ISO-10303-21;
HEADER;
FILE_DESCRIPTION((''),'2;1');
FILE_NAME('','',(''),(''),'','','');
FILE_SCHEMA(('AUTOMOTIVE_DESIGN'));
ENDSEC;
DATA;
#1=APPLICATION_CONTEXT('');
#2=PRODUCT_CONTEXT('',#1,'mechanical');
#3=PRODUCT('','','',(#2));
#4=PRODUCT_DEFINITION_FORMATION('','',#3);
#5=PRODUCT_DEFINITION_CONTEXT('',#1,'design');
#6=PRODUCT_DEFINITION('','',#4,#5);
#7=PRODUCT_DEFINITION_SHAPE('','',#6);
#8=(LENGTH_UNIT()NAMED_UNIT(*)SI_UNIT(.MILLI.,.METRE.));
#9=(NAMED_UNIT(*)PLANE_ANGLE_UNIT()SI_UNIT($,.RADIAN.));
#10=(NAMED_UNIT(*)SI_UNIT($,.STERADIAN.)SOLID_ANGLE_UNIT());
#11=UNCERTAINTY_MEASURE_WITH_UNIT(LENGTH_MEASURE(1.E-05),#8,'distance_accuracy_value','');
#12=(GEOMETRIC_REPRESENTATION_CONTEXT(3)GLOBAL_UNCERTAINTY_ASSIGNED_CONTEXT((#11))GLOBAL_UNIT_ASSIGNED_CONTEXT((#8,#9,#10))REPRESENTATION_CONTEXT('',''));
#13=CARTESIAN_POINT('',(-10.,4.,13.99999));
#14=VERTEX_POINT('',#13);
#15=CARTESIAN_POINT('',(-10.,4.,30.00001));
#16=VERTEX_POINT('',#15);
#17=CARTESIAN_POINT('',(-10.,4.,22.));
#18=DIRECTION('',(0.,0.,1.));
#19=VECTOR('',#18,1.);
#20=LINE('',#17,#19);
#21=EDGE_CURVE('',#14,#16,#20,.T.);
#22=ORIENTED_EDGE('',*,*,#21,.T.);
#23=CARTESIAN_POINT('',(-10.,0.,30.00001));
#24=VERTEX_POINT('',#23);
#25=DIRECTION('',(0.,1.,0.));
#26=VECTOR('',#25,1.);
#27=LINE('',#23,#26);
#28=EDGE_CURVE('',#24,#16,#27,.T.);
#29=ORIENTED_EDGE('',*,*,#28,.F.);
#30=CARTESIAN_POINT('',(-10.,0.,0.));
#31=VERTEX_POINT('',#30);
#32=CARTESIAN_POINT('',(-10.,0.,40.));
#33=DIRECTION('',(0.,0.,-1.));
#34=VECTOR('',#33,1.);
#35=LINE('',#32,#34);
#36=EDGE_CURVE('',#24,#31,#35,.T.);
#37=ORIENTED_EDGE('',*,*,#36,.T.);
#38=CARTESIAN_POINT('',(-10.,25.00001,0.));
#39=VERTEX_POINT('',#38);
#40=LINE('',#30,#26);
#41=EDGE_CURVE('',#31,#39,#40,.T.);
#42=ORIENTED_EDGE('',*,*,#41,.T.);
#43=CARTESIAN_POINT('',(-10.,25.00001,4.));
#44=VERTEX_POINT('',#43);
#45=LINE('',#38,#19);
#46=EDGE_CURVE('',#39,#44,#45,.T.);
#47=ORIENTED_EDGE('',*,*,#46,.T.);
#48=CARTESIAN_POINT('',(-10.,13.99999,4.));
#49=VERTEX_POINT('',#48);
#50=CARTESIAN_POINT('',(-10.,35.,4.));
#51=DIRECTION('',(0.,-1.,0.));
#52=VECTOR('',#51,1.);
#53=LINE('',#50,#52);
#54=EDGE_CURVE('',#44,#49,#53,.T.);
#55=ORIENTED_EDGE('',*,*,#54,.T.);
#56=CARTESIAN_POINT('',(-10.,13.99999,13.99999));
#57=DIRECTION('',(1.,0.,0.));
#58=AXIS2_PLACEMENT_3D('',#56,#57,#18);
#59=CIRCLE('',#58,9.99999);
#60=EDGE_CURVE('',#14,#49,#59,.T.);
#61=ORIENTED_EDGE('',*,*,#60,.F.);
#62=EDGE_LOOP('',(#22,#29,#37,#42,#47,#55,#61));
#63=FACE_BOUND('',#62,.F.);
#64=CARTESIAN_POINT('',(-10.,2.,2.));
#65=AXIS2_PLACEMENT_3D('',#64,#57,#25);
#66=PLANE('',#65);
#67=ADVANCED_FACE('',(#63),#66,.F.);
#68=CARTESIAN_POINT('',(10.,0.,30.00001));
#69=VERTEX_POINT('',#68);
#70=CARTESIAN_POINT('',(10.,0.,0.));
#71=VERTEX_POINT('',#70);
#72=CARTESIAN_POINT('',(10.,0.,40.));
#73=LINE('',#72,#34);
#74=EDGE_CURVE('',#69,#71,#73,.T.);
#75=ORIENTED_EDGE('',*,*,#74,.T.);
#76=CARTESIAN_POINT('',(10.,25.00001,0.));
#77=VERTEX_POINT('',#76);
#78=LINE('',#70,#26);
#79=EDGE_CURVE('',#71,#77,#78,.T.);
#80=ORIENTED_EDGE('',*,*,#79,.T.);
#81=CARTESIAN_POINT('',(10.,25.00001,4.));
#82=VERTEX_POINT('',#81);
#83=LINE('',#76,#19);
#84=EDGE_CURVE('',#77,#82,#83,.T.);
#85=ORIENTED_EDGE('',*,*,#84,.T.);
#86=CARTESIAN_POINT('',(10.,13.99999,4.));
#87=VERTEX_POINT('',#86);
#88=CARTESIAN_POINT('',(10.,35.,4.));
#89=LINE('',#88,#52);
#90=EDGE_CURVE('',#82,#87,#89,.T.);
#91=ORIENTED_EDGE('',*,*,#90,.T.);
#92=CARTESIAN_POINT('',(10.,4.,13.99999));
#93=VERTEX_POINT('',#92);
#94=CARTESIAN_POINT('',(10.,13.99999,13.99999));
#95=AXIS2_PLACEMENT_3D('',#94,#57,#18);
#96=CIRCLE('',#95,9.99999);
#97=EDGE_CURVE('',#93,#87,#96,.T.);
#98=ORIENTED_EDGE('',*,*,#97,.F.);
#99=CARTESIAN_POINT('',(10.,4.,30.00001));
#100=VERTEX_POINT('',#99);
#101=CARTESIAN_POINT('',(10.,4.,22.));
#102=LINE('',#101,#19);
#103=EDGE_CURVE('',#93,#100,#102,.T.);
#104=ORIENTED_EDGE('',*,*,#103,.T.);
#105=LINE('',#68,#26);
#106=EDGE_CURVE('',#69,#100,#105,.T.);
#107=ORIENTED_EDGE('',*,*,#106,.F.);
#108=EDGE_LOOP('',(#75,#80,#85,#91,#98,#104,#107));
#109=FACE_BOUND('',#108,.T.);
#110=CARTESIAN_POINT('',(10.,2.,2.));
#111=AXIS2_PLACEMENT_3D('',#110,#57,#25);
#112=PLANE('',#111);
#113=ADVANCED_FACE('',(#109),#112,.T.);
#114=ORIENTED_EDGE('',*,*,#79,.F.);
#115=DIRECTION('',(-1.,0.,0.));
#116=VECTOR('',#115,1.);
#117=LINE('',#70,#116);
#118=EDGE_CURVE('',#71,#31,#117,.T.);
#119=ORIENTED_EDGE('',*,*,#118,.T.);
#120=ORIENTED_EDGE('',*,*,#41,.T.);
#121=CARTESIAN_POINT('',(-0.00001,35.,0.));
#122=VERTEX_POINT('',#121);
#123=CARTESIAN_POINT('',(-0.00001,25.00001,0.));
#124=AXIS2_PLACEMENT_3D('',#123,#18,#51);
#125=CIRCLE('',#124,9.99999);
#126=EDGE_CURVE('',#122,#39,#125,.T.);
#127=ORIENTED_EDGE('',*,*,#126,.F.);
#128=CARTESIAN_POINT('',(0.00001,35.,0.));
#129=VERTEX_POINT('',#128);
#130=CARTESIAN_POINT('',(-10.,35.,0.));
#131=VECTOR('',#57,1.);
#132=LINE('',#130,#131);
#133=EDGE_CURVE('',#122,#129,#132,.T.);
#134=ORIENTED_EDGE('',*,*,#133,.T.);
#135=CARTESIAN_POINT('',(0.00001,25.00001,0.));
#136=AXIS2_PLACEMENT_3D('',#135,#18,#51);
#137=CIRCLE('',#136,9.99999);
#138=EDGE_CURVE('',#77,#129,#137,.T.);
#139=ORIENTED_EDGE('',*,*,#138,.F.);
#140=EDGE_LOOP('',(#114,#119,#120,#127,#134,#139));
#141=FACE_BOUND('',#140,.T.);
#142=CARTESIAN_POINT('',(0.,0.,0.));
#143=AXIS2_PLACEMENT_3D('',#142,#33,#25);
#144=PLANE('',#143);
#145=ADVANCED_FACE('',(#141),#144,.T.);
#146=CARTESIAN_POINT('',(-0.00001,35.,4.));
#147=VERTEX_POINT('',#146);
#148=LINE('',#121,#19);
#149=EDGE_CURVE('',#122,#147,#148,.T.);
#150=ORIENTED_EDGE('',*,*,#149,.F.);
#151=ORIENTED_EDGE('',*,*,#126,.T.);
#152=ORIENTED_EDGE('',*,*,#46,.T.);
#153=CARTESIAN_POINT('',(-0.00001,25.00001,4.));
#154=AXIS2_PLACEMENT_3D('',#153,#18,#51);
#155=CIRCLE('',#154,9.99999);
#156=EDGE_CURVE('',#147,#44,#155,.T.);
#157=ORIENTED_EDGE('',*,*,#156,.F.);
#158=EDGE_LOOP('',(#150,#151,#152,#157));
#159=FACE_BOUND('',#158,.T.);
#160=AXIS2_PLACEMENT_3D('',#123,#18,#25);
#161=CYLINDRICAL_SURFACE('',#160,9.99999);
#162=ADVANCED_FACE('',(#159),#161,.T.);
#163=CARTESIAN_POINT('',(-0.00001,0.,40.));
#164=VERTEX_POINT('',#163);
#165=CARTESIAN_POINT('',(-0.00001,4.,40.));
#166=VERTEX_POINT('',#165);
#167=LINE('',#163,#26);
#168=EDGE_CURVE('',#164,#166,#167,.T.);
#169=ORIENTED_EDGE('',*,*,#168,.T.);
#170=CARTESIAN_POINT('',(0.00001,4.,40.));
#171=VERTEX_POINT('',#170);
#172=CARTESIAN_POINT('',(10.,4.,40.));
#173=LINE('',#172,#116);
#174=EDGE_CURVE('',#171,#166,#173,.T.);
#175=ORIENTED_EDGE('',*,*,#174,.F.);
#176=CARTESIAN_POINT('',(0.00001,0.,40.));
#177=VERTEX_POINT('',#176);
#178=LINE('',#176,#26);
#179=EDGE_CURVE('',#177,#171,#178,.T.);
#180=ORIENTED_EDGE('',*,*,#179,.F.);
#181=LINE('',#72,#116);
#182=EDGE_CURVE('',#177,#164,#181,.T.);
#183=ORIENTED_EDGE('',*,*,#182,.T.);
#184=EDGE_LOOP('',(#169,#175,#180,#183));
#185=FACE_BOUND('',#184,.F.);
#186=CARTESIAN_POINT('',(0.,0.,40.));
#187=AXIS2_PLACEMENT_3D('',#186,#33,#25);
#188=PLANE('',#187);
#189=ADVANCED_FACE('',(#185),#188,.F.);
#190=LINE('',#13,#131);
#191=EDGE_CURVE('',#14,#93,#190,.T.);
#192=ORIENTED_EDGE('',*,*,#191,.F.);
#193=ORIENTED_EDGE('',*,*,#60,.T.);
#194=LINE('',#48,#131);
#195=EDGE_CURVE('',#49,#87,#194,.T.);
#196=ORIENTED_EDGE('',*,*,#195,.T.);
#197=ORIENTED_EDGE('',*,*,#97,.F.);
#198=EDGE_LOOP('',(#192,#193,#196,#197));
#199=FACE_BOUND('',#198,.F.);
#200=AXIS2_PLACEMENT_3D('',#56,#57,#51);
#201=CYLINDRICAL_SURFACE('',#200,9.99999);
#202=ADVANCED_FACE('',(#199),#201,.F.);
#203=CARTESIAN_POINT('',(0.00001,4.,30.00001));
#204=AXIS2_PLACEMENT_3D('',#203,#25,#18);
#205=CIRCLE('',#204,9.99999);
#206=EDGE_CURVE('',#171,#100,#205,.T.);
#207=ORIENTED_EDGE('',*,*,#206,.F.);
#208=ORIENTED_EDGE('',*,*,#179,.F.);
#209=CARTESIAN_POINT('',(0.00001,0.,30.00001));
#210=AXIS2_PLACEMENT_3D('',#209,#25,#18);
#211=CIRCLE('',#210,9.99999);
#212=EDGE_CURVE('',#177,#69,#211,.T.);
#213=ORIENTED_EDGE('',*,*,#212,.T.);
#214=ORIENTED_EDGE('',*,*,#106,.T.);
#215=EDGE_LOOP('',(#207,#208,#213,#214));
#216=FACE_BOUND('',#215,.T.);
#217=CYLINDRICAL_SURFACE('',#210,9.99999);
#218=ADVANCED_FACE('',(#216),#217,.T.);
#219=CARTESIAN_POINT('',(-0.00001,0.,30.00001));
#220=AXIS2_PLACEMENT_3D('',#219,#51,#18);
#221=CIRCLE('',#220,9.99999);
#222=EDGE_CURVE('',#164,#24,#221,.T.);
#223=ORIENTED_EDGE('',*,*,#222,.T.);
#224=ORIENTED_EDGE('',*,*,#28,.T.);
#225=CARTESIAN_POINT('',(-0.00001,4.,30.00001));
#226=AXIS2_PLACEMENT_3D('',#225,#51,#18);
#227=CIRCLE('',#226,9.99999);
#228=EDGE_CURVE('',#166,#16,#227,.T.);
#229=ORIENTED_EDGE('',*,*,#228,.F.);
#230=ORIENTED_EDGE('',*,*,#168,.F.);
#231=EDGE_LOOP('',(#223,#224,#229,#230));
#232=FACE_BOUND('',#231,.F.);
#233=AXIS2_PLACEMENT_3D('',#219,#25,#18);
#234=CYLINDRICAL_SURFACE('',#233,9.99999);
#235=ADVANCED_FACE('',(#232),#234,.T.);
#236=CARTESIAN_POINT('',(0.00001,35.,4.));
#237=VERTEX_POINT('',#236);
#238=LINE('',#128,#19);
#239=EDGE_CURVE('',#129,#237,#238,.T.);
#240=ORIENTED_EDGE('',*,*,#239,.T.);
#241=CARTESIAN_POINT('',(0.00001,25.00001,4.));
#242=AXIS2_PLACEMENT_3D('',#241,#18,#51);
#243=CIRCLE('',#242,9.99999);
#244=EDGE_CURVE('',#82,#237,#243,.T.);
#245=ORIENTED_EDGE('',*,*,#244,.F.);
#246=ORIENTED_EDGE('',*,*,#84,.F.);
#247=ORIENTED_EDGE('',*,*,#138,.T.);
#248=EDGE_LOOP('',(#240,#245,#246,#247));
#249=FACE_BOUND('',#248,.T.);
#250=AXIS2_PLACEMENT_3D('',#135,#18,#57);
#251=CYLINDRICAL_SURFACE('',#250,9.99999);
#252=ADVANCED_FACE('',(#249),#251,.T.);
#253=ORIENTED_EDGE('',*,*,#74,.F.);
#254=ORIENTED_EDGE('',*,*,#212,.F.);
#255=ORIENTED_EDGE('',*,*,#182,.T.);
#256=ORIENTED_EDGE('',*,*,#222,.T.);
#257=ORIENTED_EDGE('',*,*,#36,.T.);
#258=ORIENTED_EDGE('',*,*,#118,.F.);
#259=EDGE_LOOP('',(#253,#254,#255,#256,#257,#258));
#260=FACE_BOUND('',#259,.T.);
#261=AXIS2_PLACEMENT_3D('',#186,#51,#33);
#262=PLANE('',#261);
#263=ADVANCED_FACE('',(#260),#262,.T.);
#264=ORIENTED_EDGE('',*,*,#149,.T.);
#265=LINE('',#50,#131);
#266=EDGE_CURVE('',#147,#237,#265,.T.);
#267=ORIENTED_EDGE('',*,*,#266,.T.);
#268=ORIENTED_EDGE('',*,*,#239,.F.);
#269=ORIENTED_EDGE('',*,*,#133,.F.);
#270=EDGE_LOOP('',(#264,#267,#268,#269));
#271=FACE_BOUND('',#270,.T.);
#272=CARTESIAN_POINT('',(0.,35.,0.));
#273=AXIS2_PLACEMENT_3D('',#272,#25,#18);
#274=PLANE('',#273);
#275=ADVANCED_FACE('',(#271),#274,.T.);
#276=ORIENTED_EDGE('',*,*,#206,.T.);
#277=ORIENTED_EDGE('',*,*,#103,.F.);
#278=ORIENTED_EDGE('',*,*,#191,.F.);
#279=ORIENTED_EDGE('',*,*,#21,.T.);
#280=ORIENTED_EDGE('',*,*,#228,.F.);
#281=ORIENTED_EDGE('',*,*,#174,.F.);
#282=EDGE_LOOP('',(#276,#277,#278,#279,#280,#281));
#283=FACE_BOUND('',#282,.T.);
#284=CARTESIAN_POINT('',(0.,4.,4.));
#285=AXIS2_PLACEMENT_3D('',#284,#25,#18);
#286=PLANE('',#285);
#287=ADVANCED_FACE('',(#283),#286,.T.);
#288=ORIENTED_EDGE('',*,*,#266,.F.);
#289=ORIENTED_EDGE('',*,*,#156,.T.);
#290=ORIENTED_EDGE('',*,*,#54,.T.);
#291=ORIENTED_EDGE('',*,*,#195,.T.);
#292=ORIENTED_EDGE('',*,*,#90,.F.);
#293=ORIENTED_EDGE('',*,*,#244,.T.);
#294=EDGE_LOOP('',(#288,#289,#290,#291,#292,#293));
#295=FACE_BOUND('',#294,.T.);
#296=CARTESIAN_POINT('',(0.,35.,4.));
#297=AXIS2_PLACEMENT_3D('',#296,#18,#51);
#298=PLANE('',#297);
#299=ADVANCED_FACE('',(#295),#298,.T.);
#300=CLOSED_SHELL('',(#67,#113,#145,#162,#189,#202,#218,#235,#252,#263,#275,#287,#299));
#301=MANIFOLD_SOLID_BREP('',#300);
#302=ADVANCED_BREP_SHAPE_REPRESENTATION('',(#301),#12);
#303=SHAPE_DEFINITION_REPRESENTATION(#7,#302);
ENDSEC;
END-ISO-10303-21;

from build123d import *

# Parameters (mm, degrees)
F0_W     = 4
F0_H     = 4
F0_W_2   = 31
F0_H_2   = 36
F1_DEPTH = 10
F2_R     = 9.99999


# Not quite as in the source:
# - a fillet or chamfer is up to 0.001 mm smaller than in the source, because OpenCascade refuses the exact size


with BuildPart() as f1:
    # F0 (on Right) → F1 (new body, symmetric)
    with BuildSketch(Plane.YZ):
        with Locations((2, 2)):
            Rectangle(F0_W, F0_H)
        with Locations((19.5, 2)):
            Rectangle(F0_W_2, F0_H)
        with Locations((2, 22)):
            Rectangle(F0_W, F0_H_2)
    extrude(amount=F1_DEPTH, both=True)

    # F2 (radius 10 in the source; OpenCascade refuses exactly that, so slightly less here)
    f2_edges = [f1.edges().sort_by_distance(p)[0] for p in [
        (0, 4, 4),
        (10, 35, 2),
        (-10, 35, 2),
        (10, 2, 40),
        (-10, 2, 40),
    ]]
    fillet(f2_edges, radius=F2_R)


solid = f1.part
